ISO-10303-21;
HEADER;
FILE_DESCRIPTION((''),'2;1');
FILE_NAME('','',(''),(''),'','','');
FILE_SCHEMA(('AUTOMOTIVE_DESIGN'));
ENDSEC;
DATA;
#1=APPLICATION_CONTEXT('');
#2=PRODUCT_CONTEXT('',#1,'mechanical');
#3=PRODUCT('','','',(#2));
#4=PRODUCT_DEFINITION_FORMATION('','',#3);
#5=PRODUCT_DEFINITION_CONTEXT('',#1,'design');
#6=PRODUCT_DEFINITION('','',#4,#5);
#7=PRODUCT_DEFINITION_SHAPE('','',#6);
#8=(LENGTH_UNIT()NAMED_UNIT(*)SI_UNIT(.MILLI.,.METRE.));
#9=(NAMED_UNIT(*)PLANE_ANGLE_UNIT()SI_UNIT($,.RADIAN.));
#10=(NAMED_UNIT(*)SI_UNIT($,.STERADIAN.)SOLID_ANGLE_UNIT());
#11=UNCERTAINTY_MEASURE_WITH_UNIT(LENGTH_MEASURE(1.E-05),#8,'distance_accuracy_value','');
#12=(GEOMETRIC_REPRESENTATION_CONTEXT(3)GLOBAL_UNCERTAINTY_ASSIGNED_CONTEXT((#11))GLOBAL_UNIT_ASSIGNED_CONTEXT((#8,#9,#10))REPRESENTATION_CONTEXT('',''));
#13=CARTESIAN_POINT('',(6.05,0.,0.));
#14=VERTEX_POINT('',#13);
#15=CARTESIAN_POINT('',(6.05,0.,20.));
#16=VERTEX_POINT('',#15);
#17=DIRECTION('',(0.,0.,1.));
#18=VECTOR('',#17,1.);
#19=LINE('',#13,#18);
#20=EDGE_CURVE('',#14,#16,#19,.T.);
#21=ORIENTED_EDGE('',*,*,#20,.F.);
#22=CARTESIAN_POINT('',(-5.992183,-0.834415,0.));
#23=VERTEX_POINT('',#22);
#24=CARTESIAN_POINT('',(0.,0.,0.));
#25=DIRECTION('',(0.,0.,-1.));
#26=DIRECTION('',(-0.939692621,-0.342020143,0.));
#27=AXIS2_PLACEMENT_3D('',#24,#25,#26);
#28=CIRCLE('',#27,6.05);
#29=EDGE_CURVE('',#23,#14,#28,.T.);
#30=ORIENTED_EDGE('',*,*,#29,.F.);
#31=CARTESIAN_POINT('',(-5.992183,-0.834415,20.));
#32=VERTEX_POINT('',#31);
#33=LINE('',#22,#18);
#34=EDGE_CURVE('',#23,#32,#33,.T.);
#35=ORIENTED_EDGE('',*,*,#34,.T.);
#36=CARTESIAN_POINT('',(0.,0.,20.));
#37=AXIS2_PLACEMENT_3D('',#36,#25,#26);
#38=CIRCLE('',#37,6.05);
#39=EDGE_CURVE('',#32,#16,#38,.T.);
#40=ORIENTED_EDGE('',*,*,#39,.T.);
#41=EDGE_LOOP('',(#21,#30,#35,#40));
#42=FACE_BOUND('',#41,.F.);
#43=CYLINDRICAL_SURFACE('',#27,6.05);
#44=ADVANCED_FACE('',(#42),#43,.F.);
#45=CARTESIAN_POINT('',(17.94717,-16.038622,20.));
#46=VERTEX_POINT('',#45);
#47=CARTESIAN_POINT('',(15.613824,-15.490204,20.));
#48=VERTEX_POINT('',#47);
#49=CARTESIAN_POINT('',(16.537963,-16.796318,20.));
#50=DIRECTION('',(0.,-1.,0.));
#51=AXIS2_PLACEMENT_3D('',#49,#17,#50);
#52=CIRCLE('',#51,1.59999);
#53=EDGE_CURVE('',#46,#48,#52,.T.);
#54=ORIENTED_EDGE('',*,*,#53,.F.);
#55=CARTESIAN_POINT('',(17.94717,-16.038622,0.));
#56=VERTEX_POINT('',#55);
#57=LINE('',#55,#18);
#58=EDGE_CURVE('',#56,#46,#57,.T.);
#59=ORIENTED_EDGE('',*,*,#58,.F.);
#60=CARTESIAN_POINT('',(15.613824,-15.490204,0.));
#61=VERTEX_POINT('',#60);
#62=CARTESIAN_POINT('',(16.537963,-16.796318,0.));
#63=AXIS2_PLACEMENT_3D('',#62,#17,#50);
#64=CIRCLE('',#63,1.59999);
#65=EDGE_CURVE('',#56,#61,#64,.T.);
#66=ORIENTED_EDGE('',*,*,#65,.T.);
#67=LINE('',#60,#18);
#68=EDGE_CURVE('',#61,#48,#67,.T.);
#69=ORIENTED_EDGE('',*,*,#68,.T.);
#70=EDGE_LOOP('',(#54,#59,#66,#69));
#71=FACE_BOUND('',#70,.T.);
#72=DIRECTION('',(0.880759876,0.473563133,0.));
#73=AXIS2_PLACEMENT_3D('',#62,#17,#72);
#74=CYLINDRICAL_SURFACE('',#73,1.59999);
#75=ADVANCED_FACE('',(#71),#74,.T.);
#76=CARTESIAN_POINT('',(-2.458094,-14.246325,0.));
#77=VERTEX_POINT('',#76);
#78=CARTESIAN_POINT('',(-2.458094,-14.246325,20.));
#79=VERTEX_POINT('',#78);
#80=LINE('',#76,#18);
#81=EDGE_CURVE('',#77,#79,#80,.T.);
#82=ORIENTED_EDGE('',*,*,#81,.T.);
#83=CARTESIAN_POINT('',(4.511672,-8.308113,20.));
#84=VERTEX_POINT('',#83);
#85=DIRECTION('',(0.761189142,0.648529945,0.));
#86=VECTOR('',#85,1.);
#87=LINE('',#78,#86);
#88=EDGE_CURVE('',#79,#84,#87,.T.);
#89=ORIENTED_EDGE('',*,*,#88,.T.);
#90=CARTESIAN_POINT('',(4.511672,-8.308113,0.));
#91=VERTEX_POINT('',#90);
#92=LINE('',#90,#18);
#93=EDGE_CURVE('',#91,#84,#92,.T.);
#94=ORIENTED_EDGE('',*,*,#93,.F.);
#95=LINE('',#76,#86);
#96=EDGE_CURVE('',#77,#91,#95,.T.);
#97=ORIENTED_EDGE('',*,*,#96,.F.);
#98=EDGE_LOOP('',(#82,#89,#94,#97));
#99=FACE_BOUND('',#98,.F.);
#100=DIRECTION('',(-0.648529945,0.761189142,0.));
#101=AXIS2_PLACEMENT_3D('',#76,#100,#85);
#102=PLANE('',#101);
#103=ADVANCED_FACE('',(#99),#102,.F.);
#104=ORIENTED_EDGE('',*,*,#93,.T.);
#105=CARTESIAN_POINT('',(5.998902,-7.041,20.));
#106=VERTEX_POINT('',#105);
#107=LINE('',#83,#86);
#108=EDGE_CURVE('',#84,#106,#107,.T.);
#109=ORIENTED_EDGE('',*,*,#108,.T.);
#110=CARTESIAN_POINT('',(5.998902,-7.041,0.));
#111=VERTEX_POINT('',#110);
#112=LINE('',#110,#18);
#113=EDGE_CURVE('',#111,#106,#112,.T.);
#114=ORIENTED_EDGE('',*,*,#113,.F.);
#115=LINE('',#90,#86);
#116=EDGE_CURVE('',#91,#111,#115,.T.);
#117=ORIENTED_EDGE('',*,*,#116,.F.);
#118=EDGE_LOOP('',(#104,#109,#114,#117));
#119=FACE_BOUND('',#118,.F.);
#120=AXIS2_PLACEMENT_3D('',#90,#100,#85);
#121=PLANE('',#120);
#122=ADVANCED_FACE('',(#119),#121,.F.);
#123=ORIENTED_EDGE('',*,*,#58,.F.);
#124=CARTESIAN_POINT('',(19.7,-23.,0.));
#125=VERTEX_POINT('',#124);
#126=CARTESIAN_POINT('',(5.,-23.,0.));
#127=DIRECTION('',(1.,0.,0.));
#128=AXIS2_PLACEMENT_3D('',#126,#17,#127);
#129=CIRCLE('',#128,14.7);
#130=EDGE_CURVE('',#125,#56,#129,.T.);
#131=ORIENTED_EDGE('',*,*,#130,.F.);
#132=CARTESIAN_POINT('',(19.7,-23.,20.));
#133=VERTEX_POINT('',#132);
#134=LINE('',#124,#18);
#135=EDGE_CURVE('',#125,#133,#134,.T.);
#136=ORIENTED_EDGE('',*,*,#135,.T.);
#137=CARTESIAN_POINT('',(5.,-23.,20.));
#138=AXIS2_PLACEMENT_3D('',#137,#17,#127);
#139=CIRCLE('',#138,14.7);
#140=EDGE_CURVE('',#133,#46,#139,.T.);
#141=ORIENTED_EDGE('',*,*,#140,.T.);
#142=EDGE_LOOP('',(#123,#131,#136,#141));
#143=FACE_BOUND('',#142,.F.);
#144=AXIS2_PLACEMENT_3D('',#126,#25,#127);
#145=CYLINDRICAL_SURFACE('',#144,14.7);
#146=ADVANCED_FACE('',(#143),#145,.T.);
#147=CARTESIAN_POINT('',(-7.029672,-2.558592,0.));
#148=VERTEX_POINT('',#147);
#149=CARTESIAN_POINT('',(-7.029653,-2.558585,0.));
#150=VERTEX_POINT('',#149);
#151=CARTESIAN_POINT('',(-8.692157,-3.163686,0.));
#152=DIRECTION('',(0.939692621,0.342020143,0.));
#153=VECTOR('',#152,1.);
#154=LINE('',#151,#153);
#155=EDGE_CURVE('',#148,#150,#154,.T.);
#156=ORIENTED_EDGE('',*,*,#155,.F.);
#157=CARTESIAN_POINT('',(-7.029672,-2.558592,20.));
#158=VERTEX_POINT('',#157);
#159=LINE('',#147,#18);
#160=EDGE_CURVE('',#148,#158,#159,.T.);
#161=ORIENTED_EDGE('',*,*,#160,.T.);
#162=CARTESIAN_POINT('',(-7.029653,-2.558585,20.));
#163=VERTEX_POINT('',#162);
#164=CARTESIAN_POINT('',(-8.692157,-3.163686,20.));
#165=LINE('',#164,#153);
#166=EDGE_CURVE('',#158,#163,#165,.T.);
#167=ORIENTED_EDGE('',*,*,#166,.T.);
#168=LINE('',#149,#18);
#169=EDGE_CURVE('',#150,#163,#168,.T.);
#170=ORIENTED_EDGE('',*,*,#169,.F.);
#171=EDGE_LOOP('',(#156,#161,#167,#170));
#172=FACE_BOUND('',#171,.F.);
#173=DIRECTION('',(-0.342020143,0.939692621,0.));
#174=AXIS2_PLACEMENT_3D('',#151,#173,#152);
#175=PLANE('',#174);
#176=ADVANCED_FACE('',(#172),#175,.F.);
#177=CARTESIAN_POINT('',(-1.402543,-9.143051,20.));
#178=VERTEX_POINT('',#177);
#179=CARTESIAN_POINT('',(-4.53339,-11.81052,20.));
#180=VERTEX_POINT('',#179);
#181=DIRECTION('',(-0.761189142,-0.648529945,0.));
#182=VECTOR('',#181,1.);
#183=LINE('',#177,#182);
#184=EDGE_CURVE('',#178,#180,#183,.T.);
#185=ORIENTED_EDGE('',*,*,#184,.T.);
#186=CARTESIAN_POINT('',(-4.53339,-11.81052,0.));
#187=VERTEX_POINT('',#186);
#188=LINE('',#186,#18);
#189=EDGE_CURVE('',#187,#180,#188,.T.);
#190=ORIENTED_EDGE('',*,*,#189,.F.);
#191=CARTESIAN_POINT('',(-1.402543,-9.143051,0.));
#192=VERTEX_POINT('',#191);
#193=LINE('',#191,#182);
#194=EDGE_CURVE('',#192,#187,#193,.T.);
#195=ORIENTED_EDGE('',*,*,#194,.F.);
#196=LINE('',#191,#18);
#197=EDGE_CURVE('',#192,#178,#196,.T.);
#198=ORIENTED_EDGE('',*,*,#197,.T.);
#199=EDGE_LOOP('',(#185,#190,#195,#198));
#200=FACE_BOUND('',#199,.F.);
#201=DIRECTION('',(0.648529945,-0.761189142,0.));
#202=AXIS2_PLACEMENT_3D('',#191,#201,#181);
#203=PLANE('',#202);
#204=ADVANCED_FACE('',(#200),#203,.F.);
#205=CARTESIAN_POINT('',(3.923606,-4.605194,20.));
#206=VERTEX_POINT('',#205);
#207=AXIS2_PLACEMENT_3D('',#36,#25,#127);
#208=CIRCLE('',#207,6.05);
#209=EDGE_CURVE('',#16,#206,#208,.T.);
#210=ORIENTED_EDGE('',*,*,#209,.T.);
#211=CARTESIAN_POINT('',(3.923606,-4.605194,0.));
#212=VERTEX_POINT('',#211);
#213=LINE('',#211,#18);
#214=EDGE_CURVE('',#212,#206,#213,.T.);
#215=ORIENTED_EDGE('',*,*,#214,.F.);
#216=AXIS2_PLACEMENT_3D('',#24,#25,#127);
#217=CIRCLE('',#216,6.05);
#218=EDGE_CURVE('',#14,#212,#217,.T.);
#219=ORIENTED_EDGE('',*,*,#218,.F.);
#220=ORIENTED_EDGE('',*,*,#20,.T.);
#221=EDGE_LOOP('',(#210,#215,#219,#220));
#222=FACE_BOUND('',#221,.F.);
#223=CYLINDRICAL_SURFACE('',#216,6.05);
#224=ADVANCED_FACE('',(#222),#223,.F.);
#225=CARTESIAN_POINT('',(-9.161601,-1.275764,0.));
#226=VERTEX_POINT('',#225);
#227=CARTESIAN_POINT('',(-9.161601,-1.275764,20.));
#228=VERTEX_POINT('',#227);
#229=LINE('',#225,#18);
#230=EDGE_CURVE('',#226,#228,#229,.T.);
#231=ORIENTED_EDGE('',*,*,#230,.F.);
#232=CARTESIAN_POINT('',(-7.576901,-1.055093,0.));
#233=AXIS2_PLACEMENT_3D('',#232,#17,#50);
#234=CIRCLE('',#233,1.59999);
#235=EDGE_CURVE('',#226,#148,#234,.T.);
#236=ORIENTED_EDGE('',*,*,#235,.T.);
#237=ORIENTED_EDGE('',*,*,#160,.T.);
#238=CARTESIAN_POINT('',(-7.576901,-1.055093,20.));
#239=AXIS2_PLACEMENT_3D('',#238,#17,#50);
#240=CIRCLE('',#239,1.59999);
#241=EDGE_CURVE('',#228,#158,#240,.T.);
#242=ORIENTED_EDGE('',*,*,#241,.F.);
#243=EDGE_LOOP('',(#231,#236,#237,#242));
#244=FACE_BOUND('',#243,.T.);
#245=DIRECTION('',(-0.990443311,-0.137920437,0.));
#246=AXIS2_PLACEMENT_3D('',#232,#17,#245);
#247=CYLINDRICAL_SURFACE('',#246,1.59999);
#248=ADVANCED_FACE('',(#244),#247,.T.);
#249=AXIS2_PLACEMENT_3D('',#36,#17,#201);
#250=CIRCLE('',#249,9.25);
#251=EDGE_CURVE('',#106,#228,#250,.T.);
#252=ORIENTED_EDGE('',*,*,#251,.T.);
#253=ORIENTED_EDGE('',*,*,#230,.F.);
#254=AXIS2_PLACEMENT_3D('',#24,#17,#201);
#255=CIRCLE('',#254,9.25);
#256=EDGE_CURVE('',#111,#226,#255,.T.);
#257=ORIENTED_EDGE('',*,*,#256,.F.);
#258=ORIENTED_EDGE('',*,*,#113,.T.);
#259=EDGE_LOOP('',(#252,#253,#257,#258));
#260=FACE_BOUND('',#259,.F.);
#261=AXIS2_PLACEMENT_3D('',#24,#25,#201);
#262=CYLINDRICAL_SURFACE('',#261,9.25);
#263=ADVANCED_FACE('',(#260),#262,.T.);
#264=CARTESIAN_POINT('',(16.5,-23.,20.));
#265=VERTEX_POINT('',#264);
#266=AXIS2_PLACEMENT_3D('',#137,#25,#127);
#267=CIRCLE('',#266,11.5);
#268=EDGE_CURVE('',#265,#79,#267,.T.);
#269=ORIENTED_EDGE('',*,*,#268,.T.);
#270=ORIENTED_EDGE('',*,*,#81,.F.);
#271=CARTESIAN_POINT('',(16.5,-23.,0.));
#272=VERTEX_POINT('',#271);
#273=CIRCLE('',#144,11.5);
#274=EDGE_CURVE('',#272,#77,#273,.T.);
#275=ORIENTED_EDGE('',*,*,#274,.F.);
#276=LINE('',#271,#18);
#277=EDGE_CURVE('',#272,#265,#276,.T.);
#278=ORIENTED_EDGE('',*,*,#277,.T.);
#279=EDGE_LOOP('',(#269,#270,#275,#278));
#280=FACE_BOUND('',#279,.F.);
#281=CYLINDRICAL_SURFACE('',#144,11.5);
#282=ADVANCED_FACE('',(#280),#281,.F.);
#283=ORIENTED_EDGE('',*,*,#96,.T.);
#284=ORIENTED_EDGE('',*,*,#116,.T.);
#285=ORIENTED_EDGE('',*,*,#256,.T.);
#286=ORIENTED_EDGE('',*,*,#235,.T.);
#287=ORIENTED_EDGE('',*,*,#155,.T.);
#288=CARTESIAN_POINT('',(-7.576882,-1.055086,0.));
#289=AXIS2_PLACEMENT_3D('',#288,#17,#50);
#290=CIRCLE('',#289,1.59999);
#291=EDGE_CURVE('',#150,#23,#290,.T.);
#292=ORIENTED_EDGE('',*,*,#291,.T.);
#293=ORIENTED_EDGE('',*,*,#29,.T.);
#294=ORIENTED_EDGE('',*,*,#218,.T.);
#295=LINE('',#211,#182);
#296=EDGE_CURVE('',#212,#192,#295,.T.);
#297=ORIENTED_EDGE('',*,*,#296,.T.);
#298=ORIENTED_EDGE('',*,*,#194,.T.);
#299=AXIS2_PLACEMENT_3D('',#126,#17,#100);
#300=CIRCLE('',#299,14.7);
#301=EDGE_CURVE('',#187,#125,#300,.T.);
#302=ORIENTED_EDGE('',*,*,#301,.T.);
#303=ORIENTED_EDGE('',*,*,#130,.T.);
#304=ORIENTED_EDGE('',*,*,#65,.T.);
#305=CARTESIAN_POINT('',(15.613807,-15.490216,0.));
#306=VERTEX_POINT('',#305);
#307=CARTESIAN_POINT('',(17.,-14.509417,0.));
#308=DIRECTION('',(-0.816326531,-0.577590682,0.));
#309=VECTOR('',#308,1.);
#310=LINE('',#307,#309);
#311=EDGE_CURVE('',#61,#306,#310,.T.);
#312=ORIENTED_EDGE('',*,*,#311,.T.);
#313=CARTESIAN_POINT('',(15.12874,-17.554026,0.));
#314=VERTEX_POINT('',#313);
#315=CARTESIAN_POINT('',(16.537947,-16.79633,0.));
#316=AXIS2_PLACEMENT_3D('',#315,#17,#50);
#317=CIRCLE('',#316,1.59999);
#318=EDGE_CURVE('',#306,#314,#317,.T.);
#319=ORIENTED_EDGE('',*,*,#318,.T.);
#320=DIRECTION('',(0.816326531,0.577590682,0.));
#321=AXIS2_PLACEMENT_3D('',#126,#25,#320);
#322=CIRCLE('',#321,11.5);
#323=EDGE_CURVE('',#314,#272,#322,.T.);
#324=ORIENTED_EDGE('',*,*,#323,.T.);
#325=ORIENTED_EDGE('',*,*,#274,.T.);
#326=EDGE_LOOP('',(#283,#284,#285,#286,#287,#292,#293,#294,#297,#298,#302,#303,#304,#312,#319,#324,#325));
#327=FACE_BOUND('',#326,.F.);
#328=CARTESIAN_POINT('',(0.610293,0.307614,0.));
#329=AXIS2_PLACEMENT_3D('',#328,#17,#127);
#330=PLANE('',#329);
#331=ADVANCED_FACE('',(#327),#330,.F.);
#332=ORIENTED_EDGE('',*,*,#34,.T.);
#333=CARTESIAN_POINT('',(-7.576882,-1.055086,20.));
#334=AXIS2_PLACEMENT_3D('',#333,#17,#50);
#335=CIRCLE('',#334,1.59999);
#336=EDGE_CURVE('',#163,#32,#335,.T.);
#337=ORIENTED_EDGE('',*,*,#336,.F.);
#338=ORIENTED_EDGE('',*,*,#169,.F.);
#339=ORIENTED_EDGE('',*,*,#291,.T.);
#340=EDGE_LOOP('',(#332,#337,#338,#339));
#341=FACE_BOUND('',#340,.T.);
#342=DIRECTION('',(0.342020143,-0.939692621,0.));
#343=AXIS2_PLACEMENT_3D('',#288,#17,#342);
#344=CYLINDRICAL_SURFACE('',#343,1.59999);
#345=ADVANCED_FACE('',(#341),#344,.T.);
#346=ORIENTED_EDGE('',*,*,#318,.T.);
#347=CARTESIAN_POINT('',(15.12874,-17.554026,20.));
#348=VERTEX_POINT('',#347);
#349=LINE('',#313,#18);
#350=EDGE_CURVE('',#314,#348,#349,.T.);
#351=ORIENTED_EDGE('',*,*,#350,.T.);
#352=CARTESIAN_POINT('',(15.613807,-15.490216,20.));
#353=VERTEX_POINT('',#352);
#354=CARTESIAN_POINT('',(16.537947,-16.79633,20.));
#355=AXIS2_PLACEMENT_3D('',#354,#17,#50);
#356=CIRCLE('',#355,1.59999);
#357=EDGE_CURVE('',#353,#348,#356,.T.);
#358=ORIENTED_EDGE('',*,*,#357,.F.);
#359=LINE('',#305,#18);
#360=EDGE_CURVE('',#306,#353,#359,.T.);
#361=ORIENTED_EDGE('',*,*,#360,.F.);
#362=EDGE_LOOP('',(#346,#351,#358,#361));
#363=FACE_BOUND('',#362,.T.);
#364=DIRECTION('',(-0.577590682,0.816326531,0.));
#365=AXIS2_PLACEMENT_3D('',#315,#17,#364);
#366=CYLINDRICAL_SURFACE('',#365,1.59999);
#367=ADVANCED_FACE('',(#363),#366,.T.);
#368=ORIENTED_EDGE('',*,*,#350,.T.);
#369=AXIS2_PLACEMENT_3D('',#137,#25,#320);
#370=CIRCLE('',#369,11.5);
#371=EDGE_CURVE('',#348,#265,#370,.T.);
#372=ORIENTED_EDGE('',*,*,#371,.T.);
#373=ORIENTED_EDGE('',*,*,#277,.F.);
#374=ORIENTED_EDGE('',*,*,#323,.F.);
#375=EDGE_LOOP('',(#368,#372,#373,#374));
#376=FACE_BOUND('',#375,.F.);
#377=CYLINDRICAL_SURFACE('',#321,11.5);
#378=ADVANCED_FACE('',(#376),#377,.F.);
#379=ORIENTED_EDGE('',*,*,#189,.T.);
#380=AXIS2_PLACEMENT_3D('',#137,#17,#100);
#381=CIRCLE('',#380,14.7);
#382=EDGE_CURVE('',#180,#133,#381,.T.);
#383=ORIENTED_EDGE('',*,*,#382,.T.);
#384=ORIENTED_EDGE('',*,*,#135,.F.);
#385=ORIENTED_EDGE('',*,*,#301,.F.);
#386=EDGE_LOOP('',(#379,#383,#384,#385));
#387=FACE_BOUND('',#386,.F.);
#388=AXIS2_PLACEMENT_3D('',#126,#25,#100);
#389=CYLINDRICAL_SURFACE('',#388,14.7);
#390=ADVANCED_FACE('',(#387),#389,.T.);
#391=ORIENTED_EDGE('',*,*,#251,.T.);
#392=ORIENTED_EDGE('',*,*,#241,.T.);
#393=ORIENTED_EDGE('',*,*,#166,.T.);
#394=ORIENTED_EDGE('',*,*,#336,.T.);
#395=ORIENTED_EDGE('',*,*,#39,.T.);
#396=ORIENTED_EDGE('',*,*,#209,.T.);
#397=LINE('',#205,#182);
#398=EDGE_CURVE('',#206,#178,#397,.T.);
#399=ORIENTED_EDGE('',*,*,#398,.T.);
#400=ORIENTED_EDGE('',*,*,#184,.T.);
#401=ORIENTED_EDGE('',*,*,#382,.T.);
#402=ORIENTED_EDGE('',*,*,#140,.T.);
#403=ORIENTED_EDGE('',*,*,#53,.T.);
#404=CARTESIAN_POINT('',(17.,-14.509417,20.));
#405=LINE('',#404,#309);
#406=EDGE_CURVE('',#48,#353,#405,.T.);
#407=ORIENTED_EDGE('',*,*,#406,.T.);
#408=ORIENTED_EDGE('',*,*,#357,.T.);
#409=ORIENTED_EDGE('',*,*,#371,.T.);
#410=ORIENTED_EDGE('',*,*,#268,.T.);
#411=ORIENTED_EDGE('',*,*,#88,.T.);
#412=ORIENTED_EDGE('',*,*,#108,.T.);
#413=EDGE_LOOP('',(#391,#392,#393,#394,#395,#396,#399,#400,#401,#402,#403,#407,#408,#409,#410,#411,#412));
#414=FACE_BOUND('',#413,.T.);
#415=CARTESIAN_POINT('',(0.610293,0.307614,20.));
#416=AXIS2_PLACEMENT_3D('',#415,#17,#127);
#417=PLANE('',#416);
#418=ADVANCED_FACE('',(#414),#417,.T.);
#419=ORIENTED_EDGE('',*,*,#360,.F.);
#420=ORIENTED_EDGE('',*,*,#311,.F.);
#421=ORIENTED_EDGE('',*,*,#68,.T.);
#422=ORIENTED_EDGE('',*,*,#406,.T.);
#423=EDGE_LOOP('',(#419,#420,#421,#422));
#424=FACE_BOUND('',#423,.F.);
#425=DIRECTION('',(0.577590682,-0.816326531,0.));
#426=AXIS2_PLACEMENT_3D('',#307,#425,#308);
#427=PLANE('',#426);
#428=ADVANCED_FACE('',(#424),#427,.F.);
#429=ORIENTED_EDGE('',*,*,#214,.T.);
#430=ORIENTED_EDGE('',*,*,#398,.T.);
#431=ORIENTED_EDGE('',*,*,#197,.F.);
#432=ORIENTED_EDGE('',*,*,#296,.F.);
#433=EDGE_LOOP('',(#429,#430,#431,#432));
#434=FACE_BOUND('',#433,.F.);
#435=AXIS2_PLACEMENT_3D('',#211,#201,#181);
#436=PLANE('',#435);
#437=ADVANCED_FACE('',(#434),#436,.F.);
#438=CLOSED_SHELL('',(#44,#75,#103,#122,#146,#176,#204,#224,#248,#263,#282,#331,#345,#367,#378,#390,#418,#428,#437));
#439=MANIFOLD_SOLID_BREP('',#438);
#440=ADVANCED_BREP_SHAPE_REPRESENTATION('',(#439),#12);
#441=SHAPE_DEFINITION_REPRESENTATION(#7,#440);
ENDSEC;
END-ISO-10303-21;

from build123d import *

# Parameters (mm, degrees)
F1_DEPTH = 20
F2_R     = 1.59999


# Not quite as in the source:
# - a fillet or chamfer is up to 0.001 mm smaller than in the source, because OpenCascade refuses the exact size


with BuildPart() as f1:
    # F0 (on Top) → F1 (new body)
    with BuildSketch(Plane.XY):
        with BuildLine():
            ThreePointArc((6.05, 0), (5.4927369002, -2.5362060928), (3.9236061669, -4.6051943115))
            Line((3.9236061669, -4.6051943115), (-1.4025425598, -9.1430506051))
            ThreePointArc((-1.4025425598, -9.1430506051), (-0.799716174, -9.2153651062), (-0.1934443699, -9.2479770369))
            ThreePointArc((-0.1934443699, -9.2479770369), (1.8772842283, -8.6355074503), (4.015398341, -8.3330112302))
            ThreePointArc((4.015398341, -8.3330112302), (5.0486509404, -7.7507176237), (5.9989019907, -7.0409995672))
            ThreePointArc((5.9989019907, -7.0409995672), (8.3979861697, -3.8776704725), (9.25, 0))
            ThreePointArc((9.25, 0), (-1.6062456434, 9.1094717154), (-8.6921567423, -3.1636863258))
            Line((-8.6921567423, -3.1636863258), (-5.6851403558, -2.0692218671))
            ThreePointArc((-5.6851403558, -2.0692218671), (-1.0505714749, 5.9580869057), (6.05, 0))
        make_face()
        with BuildLine():
            ThreePointArc((4.015398341, -8.3330112302), (1.9649742101, -9.0388813663), (-0.1934443699, -9.2479770369))
            ThreePointArc((-0.1934443699, -9.2479770369), (-2.4740598171, -10.3418630972), (-4.5333901906, -11.8105196067))
            ThreePointArc((-4.5333901906, -11.8105196067), (-1.1623519941, -36.3459888319), (19.7, -23))
            ThreePointArc((19.7, -23), (19.0087472673, -18.5452272785), (17, -14.5094169811))
            Line((17, -14.5094169811), (14.387755102, -16.3577071621))
            ThreePointArc((14.387755102, -16.3577071621), (15.9592240527, -19.5149737213), (16.5, -23))
            ThreePointArc((16.5, -23), (0.1791123856, -33.4407395624), (-2.4580943668, -14.2463248624))
            Line((-2.4580943668, -14.2463248624), (4.5116719892, -8.3081132677))
            ThreePointArc((4.5116719892, -8.3081132677), (4.2634299557, -8.3184651834), (4.015398341, -8.3330112302))
        make_face()
        with BuildLine():
            ThreePointArc((-0.1934443699, -9.2479770369), (-0.799716174, -9.2153651062), (-1.4025425598, -9.1430506051))
            Line((-1.4025425598, -9.1430506051), (-4.5333901906, -11.8105196067))
            ThreePointArc((-4.5333901906, -11.8105196067), (-2.4740598171, -10.3418630972), (-0.1934443699, -9.2479770369))
        make_face()
        with BuildLine():
            ThreePointArc((4.015398341, -8.3330112302), (1.8772842283, -8.6355074503), (-0.1934443699, -9.2479770369))
            ThreePointArc((-0.1934443699, -9.2479770369), (1.9649742101, -9.0388813663), (4.015398341, -8.3330112302))
        make_face()
        with BuildLine():
            ThreePointArc((5.9989019907, -7.0409995672), (5.0486509404, -7.7507176237), (4.015398341, -8.3330112302))
            ThreePointArc((4.015398341, -8.3330112302), (4.2634299557, -8.3184651834), (4.5116719892, -8.3081132677))
            Line((4.5116719892, -8.3081132677), (5.9989019907, -7.0409995672))
        make_face()
    extrude(amount=F1_DEPTH)

    # F2 (radius 1.6 in the source; OpenCascade refuses exactly that, so slightly less here)
    f2_edges = [f1.edges().sort_by_distance(p)[0] for p in [
        (17, -14.509417, 10),
        (14.387755, -16.357707, 10),
        (-8.692157, -3.163686, 10),
        (-5.68514, -2.069222, 10),
    ]]
    fillet(f2_edges, radius=F2_R)


solid = f1.part
